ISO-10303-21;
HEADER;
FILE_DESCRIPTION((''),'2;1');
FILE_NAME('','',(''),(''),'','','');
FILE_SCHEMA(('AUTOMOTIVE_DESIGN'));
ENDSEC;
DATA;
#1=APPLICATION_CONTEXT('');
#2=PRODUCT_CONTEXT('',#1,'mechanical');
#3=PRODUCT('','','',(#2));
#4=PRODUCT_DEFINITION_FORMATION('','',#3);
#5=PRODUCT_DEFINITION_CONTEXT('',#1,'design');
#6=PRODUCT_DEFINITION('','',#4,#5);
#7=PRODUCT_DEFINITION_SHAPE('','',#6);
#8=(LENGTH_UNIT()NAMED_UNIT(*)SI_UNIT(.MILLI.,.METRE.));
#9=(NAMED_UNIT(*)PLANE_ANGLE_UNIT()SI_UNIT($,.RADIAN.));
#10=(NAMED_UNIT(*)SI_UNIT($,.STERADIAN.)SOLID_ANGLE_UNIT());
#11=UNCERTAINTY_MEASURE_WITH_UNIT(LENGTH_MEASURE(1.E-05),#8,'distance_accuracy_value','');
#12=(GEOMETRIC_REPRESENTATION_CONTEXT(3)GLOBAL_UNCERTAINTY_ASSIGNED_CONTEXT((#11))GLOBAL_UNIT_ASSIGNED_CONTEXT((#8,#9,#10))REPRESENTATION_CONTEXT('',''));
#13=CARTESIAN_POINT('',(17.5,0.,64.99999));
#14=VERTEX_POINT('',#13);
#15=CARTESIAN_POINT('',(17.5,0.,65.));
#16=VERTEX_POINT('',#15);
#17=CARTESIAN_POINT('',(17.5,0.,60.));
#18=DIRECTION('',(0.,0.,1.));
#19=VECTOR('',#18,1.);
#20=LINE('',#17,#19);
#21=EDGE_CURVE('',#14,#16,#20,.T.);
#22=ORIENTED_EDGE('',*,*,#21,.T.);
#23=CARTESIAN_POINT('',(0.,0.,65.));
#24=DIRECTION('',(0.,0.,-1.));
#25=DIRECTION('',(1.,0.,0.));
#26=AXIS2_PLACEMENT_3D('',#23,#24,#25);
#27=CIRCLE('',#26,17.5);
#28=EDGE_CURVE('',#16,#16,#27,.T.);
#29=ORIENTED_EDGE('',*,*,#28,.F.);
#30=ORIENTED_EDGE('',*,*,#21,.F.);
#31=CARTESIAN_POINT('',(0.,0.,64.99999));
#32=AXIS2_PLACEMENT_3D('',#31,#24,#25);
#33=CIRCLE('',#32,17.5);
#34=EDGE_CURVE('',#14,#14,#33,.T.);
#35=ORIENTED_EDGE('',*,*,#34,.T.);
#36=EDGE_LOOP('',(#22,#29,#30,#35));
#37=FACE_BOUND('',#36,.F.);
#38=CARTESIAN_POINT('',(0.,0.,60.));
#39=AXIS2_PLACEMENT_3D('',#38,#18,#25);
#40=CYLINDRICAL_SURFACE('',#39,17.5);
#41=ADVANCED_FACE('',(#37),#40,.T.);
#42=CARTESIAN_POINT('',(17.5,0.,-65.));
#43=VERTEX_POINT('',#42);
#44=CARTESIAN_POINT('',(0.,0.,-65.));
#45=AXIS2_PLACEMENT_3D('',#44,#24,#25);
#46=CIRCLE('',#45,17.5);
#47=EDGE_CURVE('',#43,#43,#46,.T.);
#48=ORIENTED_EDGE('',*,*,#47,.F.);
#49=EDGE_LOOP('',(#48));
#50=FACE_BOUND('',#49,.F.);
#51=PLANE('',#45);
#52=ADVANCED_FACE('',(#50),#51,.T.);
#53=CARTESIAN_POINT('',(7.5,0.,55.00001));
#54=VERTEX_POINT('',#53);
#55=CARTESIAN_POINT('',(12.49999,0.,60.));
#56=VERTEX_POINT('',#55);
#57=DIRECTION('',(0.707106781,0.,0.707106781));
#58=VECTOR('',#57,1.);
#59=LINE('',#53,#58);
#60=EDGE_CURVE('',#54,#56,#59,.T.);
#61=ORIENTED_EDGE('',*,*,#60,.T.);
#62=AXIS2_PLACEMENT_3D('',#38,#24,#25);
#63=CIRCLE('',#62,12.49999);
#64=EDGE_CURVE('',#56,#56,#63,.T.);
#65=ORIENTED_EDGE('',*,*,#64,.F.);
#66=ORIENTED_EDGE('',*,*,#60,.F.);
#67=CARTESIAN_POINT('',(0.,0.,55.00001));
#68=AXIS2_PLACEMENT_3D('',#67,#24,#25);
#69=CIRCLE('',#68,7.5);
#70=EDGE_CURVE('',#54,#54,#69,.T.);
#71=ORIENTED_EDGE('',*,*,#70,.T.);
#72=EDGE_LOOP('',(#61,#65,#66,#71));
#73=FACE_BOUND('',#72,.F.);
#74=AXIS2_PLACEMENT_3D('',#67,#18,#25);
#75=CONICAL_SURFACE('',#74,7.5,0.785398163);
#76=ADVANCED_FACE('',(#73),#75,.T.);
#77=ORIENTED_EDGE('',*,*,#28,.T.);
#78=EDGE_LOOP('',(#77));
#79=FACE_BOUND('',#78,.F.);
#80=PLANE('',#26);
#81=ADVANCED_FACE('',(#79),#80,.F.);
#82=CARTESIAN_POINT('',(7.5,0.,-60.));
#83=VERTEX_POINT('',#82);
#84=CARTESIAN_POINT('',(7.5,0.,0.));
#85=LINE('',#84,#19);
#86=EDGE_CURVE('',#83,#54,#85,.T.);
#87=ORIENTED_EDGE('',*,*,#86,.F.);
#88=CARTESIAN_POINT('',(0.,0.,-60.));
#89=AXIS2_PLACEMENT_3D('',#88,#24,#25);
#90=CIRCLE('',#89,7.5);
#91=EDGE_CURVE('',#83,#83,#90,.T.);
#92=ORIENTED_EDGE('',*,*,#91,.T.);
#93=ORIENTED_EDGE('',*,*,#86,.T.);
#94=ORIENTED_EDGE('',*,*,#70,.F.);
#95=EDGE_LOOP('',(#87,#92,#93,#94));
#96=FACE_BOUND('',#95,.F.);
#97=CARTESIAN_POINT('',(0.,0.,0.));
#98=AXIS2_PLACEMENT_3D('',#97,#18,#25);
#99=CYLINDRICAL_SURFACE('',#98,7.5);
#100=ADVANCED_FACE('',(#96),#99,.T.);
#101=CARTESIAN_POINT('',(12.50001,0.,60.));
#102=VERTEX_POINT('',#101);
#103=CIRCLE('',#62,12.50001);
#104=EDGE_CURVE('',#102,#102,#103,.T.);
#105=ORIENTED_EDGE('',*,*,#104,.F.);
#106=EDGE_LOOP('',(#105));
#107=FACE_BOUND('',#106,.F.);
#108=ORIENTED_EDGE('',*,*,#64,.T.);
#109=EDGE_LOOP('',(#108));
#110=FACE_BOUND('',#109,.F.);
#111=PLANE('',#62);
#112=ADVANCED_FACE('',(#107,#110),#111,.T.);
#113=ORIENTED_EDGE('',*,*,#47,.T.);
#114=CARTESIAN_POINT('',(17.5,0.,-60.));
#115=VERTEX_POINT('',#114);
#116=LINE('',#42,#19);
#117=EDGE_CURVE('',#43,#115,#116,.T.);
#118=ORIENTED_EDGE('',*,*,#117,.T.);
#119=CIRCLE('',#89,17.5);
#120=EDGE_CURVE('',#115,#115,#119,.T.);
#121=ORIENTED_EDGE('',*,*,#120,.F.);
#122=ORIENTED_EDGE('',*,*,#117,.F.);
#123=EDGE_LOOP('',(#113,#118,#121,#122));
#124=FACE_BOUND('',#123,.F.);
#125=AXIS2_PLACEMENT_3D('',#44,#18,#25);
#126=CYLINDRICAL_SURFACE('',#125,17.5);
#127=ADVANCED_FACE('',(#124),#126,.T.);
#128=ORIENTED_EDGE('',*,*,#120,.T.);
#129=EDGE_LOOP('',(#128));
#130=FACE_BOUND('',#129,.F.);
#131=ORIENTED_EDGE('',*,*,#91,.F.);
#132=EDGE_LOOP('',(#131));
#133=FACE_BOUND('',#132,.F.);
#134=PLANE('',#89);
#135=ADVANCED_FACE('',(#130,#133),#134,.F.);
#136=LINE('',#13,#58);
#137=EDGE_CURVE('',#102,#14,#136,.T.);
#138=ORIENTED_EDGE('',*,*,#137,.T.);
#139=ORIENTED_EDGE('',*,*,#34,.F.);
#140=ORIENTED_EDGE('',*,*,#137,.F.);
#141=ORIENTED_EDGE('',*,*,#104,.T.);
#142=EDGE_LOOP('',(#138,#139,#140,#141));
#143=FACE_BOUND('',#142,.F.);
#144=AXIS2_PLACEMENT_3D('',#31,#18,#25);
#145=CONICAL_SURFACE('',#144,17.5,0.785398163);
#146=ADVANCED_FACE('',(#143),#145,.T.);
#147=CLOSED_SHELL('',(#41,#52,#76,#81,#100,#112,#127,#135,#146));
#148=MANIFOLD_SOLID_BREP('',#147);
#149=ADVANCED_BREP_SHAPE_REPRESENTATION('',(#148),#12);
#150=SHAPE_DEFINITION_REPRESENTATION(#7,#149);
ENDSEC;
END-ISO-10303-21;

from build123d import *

# Parameters (mm, degrees)
F0_W    = 7.5
F0_H    = 120
F4_SIZE = 4.99999


# Not quite as in the source:
# - a fillet or chamfer is up to 0.001 mm smaller than in the source, because OpenCascade refuses the exact size


with BuildPart() as f1:
    # F0 (on Front) → F1 (revolve)
    with BuildSketch(Plane.XZ):
        Polygon((0, 65), (0, 60), (7.5, 60), (17.5, 60), (17.5, 65), align=None)
    revolve(axis=Axis((0, 0, 0), (0, 0, -1)))

    # F0 (on Front) → F2 (revolve)
    with BuildSketch(Plane.XZ):
        with Locations((3.75, 0)):
            Rectangle(F0_W, F0_H)
    revolve(axis=Axis((0, 0, 0), (0, 0, -1)))

    # F0 (on Front) → F3 (revolve)
    with BuildSketch(Plane.XZ):
        Polygon((7.5, -60), (0, -60), (0, -65), (17.5, -65), (17.5, -60), align=None)
    revolve(axis=Axis((0, 0, 0), (0, 0, -1)))

    # F4 (size 5 in the source; OpenCascade refuses exactly that, so slightly less here)
    f4_edges = [f1.edges().sort_by_distance(p)[0] for p in [
        (-17.5, 0, 60),
        (-7.5, 0, 60),
    ]]
    chamfer(f4_edges, length=F4_SIZE)


solid = f1.part
